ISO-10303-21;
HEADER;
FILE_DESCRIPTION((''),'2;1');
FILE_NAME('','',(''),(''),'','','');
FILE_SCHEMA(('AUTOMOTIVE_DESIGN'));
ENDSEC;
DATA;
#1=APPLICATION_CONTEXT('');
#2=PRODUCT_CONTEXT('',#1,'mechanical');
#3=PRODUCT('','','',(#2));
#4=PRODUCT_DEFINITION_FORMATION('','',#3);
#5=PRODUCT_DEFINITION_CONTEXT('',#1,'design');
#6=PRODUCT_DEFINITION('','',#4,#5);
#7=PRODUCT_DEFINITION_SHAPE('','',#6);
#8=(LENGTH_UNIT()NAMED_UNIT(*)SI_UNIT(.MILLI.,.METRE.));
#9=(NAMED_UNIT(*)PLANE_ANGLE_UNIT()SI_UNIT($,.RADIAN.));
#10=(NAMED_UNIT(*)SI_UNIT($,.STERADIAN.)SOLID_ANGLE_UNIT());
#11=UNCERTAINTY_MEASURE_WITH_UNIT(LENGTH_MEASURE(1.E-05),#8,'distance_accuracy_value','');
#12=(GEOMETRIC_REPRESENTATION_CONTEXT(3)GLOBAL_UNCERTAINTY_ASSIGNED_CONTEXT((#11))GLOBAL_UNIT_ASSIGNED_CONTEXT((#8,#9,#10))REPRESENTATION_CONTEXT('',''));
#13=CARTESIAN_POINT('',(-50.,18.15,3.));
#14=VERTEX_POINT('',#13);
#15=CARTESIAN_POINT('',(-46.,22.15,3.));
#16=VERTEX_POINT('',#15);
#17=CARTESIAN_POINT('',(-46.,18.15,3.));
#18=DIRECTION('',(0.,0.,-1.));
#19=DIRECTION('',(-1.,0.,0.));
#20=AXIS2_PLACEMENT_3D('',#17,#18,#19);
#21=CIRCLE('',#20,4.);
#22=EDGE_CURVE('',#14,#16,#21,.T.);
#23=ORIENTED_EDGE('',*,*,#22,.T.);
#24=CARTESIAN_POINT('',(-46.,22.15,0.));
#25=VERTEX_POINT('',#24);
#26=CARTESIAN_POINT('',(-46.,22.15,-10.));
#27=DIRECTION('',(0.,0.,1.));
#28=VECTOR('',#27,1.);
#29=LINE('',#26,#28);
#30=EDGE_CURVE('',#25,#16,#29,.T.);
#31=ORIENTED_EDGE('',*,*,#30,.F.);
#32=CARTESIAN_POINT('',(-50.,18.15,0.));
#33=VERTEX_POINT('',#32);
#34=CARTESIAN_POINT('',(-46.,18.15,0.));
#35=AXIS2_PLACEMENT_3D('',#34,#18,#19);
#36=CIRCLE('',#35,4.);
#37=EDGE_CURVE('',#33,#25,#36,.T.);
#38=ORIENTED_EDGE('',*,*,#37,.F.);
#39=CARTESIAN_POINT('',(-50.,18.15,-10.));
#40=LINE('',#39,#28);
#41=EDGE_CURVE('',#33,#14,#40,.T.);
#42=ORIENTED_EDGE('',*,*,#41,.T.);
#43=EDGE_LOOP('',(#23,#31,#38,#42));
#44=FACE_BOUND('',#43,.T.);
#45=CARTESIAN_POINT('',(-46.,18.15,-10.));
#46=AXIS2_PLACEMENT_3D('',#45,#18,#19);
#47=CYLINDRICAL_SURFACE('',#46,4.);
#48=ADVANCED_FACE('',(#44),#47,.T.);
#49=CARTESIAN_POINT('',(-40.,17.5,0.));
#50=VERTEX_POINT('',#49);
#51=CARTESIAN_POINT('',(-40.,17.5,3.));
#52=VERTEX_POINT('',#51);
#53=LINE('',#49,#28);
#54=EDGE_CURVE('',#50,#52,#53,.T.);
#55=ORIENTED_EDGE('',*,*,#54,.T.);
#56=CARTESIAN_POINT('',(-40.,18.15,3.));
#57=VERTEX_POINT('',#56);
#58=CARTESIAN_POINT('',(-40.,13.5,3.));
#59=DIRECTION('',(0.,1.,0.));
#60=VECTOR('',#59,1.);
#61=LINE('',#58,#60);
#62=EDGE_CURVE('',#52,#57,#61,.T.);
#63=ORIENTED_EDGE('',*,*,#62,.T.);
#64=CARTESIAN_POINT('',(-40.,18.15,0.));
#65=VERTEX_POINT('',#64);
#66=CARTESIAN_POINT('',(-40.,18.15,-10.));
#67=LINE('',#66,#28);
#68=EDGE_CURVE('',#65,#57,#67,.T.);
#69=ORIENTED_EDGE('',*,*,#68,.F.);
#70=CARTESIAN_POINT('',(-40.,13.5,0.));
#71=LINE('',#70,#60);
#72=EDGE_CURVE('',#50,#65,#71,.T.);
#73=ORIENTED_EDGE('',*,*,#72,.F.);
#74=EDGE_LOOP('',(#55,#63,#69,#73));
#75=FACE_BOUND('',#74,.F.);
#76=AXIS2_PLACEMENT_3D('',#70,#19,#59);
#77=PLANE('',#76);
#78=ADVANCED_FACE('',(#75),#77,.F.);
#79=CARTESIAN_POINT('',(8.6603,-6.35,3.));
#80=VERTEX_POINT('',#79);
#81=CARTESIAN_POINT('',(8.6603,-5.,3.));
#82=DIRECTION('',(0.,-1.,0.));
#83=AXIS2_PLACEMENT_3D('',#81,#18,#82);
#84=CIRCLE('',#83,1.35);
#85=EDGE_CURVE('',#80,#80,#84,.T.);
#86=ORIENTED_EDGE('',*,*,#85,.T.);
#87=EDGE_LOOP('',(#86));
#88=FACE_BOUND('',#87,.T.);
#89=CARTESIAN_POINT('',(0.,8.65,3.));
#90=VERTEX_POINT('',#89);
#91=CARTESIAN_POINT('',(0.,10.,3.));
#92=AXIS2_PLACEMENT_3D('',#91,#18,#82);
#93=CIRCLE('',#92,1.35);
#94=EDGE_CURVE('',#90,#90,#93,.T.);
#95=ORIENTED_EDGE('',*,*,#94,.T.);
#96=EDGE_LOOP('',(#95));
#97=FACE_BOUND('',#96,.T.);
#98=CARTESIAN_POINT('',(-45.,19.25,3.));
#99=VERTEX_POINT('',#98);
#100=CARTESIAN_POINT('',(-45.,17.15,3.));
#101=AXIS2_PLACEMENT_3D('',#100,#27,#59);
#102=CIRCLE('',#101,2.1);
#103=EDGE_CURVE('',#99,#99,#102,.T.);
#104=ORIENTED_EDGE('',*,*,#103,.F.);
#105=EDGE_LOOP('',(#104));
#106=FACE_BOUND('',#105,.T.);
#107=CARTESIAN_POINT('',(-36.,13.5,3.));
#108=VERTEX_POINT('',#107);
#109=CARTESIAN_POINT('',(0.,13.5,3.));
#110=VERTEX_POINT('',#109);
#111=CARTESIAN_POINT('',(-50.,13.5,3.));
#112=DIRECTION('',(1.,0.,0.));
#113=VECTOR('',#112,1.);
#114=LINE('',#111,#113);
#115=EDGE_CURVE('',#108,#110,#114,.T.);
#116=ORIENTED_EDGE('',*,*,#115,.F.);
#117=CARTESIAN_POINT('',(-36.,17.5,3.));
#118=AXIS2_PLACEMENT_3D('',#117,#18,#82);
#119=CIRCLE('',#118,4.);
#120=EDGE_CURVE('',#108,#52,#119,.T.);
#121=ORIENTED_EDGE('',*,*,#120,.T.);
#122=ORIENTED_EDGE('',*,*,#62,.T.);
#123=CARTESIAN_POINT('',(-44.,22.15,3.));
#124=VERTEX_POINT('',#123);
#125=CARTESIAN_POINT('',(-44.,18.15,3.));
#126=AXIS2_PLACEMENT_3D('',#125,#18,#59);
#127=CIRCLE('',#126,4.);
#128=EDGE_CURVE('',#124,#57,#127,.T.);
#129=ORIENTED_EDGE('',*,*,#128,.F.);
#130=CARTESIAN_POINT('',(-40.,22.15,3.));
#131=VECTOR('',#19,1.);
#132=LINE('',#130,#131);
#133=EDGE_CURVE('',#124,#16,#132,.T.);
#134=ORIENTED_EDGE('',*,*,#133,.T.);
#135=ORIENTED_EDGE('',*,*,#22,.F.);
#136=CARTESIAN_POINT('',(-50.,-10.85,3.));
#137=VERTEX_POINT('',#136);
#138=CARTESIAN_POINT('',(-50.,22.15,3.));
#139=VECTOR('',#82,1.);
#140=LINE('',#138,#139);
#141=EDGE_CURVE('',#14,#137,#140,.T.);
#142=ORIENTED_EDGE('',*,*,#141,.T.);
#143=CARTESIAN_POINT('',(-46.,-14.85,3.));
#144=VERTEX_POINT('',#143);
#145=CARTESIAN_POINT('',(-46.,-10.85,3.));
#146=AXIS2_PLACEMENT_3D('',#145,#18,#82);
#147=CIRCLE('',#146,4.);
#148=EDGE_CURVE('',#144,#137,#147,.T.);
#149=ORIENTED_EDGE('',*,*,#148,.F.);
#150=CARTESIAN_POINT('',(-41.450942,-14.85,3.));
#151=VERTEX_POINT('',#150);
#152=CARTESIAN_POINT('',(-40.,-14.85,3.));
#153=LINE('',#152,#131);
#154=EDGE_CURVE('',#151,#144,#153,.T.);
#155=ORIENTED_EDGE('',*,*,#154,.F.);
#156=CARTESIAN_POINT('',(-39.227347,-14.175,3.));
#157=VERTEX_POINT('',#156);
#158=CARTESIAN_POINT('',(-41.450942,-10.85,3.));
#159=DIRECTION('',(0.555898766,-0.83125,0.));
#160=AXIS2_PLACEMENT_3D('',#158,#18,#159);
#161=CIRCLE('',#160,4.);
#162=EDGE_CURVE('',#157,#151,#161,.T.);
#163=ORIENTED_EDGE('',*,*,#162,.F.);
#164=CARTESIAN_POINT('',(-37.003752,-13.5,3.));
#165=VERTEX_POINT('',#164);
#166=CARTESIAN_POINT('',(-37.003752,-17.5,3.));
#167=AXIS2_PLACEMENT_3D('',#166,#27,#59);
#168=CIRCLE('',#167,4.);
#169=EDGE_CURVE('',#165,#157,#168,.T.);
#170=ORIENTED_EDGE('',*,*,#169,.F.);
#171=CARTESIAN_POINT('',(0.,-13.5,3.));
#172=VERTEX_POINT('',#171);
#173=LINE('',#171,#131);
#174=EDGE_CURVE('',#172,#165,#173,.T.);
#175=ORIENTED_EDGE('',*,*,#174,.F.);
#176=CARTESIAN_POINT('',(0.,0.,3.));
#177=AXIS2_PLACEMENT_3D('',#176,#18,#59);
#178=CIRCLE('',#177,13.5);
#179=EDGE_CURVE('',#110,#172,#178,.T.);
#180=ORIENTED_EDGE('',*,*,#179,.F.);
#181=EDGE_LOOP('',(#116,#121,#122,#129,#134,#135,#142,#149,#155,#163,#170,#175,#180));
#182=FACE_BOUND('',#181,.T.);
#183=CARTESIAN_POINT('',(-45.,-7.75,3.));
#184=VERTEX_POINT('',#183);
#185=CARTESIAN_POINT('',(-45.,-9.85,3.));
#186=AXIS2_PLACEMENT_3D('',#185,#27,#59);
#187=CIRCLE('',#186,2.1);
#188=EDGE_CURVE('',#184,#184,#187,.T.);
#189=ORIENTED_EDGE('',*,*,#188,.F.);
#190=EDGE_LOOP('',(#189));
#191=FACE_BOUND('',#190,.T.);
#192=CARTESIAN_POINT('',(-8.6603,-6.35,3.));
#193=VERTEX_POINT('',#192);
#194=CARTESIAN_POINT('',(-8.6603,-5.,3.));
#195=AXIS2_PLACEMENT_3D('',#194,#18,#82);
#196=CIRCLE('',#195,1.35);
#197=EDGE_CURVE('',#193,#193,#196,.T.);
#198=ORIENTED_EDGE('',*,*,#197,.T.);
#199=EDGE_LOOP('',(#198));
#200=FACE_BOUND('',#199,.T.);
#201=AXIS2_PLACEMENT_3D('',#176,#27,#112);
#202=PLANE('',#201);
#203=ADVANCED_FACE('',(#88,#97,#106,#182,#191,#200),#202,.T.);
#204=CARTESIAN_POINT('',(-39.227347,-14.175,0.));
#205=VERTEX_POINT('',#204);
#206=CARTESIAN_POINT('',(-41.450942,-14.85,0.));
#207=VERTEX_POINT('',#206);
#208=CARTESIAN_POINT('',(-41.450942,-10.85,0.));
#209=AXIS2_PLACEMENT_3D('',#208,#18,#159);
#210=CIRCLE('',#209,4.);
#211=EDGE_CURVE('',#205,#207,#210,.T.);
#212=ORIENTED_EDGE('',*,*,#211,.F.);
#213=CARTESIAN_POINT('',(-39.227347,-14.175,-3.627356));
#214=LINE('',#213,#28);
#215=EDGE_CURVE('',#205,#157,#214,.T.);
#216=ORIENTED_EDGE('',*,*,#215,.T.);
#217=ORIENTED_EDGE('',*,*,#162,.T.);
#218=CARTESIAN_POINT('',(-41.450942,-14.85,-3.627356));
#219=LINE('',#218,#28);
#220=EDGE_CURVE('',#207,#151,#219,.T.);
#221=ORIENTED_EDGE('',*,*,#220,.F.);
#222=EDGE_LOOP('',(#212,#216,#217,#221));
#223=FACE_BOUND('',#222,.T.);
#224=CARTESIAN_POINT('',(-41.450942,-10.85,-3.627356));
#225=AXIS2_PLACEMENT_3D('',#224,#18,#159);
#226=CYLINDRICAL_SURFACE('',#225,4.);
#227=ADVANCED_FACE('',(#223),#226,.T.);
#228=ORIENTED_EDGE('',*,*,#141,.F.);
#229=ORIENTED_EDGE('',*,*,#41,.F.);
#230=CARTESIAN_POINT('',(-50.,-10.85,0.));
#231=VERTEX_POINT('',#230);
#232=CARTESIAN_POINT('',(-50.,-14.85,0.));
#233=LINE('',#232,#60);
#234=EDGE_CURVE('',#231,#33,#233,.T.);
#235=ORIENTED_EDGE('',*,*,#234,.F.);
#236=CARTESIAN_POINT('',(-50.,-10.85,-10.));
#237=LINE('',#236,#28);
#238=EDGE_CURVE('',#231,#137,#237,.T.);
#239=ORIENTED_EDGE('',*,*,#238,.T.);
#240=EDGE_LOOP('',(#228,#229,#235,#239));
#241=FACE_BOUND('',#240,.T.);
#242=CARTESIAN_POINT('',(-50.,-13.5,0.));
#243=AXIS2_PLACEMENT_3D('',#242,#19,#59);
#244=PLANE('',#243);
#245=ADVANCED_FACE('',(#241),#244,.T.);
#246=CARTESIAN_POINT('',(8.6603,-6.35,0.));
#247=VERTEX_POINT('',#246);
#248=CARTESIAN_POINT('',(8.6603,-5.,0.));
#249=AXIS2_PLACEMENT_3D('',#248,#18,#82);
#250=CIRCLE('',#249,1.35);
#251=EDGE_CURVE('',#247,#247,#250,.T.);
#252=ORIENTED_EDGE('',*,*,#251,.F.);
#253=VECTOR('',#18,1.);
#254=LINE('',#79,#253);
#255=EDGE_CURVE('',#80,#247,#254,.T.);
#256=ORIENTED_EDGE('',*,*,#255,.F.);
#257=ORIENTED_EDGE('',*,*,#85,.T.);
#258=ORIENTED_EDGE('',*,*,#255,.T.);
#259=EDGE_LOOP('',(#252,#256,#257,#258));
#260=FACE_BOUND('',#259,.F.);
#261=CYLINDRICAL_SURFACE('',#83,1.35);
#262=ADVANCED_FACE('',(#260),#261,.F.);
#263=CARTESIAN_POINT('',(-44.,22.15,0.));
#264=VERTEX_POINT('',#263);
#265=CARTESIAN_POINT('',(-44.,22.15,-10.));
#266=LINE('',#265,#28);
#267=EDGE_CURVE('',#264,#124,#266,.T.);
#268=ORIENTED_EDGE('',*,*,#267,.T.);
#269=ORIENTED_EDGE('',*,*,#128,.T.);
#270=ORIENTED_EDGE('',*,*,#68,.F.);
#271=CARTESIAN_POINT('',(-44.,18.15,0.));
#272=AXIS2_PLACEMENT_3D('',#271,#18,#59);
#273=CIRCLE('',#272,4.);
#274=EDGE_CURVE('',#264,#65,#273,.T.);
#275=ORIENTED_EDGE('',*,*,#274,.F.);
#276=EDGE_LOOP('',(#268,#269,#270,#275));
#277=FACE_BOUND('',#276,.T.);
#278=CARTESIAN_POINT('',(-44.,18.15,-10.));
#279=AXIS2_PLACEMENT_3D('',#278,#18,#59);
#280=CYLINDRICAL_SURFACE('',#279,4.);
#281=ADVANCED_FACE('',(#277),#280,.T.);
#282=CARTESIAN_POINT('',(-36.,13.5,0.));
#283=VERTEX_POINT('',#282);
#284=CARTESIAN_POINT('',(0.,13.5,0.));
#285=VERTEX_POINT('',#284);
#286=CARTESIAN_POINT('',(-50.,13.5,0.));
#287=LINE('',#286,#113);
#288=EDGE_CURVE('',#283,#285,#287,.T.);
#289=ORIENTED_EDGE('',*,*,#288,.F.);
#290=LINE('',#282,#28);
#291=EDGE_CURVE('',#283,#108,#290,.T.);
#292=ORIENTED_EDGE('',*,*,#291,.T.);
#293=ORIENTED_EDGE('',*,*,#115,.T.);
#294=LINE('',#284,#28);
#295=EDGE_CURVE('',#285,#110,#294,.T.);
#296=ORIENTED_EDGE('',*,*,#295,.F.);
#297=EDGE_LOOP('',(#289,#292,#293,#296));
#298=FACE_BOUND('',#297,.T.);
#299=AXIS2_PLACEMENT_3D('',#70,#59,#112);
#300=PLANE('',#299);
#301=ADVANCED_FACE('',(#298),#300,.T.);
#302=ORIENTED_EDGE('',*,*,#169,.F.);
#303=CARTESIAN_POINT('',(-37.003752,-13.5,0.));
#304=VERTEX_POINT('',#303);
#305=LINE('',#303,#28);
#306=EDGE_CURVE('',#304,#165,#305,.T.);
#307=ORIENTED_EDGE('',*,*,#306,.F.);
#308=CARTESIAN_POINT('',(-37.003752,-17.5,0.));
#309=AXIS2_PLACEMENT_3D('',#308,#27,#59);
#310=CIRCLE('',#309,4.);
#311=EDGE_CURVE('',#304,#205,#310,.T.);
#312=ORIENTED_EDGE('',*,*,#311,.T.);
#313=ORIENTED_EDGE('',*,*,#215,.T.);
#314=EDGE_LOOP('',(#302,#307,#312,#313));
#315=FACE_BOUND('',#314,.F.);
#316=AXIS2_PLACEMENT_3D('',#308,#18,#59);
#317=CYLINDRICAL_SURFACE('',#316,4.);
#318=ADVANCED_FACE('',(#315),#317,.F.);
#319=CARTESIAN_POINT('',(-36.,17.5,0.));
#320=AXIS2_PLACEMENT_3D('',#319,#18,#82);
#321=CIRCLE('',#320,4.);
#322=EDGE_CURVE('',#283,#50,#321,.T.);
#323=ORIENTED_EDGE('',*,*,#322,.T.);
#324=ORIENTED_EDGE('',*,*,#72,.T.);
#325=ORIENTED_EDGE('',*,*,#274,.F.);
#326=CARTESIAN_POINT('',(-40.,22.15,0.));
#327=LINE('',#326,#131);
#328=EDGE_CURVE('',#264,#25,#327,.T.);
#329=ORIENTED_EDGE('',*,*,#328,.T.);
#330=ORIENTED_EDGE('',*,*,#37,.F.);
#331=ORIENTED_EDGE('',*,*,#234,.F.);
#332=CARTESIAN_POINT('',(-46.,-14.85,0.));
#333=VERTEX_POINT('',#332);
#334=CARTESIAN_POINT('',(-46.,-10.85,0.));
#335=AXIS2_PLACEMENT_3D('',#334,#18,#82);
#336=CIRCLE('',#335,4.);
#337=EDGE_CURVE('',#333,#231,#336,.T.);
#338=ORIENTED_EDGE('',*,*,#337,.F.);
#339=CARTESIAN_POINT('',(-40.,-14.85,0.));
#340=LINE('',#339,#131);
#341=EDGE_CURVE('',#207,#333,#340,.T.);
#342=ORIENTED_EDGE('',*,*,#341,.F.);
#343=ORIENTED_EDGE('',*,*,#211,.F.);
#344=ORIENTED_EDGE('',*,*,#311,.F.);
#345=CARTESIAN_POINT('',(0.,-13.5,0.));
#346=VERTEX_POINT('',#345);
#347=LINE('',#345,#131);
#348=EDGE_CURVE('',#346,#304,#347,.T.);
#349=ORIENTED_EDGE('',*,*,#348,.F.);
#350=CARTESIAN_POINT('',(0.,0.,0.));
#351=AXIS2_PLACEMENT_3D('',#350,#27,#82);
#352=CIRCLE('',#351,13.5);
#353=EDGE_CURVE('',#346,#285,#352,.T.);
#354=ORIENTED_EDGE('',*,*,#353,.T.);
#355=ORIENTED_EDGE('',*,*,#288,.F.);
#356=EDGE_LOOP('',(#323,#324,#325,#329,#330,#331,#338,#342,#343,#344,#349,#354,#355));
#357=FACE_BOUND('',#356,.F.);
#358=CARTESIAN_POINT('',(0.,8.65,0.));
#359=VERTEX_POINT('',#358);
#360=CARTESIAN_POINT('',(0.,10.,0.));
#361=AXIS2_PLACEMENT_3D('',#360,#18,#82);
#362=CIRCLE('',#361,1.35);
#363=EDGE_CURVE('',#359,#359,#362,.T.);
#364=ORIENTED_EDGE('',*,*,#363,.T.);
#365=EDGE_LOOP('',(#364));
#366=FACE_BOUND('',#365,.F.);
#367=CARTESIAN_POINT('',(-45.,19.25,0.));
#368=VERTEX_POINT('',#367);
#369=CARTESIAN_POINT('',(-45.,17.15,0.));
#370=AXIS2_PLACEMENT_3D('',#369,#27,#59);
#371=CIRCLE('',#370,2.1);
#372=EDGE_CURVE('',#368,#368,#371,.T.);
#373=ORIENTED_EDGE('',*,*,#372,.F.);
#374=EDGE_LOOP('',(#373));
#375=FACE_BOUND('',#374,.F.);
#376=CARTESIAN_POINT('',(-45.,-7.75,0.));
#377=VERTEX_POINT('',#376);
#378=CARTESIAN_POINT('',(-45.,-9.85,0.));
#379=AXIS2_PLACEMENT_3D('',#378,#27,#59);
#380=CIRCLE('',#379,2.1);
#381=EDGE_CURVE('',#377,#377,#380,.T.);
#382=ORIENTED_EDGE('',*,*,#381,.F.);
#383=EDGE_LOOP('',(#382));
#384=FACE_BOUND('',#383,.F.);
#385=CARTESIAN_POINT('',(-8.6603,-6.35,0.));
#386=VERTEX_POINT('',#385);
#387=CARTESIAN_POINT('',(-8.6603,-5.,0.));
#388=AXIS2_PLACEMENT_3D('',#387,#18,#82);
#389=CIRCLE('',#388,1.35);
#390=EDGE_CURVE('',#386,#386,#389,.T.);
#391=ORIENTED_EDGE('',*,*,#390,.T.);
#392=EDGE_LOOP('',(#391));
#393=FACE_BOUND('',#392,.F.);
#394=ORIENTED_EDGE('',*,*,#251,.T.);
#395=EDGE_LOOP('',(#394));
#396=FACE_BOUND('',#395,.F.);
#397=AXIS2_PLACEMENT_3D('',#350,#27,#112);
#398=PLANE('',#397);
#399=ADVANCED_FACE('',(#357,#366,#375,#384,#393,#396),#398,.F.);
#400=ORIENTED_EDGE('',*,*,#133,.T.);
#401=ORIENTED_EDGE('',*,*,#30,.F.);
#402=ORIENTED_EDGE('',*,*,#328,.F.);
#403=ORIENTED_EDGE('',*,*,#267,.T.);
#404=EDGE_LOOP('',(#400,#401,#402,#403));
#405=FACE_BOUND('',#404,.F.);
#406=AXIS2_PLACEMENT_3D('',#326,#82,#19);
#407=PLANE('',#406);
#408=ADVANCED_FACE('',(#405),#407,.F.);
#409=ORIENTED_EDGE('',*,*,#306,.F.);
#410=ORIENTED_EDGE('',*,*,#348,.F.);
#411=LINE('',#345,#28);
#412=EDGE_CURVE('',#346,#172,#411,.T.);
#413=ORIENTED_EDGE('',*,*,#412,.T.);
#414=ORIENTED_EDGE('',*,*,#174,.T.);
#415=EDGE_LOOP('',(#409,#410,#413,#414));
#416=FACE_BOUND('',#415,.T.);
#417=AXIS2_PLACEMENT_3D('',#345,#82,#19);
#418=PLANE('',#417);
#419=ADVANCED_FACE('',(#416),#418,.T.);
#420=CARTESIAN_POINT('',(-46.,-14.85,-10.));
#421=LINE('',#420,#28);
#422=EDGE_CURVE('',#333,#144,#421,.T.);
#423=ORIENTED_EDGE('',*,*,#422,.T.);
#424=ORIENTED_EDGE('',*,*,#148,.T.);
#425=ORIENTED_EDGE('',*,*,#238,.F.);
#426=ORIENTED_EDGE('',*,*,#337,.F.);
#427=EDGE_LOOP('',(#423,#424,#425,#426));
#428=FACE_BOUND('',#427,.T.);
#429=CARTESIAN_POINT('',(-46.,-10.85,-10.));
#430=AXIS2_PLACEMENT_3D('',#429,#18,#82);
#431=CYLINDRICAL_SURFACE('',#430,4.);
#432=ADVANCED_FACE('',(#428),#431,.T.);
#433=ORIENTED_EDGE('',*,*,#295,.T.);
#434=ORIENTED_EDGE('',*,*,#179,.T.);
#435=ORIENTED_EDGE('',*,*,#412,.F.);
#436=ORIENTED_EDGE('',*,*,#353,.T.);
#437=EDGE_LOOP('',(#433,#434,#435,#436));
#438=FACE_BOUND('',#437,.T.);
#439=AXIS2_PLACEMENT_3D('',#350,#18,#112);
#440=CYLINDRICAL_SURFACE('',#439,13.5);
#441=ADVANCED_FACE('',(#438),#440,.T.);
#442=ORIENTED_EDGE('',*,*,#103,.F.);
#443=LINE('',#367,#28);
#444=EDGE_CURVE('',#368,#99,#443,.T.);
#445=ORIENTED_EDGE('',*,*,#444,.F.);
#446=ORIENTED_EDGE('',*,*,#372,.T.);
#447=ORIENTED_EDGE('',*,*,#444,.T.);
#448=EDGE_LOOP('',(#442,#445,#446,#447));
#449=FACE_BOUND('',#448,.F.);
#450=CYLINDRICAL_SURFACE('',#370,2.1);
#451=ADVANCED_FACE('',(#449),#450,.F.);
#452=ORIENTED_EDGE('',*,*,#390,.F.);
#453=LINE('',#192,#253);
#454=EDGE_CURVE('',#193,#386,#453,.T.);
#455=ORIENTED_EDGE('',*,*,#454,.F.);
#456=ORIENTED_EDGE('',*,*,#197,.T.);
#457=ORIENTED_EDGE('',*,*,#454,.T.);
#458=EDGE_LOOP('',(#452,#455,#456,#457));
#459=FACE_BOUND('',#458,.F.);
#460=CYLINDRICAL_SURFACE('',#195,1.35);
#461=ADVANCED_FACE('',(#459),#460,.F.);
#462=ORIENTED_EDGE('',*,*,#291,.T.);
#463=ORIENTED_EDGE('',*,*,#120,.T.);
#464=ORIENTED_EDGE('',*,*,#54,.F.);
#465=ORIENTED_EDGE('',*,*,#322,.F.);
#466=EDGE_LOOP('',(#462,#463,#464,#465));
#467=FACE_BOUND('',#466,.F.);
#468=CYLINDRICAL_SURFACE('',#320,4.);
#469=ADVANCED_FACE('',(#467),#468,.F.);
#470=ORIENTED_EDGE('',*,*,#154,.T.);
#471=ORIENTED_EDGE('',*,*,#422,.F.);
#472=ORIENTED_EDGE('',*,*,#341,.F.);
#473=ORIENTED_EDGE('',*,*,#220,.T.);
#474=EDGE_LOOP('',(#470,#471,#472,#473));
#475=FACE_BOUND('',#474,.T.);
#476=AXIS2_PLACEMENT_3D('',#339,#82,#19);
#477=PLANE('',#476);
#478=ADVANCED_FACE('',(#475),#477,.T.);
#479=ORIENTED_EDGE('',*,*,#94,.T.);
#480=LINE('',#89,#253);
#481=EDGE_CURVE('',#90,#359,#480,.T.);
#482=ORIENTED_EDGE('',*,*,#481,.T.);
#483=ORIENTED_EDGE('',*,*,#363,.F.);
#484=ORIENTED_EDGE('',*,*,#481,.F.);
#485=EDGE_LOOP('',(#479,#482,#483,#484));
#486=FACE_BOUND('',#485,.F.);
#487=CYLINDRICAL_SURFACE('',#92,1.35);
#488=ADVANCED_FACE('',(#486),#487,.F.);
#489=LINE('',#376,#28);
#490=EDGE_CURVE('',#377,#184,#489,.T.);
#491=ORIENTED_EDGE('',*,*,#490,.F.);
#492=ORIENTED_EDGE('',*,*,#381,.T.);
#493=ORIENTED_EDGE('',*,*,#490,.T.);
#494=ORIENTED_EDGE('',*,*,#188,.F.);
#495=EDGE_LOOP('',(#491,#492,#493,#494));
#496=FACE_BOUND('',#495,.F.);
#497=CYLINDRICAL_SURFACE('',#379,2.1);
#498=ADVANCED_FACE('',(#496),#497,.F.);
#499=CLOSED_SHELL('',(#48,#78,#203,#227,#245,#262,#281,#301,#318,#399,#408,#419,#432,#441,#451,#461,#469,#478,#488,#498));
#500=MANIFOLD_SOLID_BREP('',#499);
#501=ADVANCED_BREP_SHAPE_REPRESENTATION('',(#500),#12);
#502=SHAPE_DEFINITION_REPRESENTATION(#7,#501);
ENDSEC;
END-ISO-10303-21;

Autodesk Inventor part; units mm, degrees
ref_plane "YZ Plane" through (0, 0, 0) normal (1, 0, 0) x (0, 1, 0)
ref_plane "XZ Plane" through (0, 0, 0) normal (0, 1, 0) x (-1, 0, 0)
ref_plane "XY Plane" through (0, 0, 0) normal (0, 0, 1) x (1, 0, 0)
sketch "スケッチ1" plane through (0, 0, 0) normal (0, 0, 1) x (1, 0, 0)
  circle A0 centre (0, 0) radius 13.5
  dimension "d0" = 27
extrude "押し出し1" add sketch "スケッチ1" along normal blind 3
sketch "スケッチ2" plane through (0, 0, 3) normal (0, 0, 1) x (1, 0, 0)
  point P0 (0, 0)
  point P1 (0, 10)
  point P2 (-8.6603, -5)
  point P3 (8.6603, -5)
  dimension "d3" = 10
  dimension "d6" = 360
hole "穴1" at (0, 10, 3) at (-8.6603, -5, 3) at (8.6603, -5, 3) direction (0, 0, -1) diameter 2.7 depth 3
sketch "スケッチ3" plane through (0, 0, 0) normal (0, 0, -1) x (-1, 0, 0)
  circle A0 centre (0, 0) radius 13.5 projected
  line L0 (0, -13.5) -> (50, -13.5)
  line L1 (50, -13.5) -> (50, 13.5)
  line L2 (50, 13.5) -> (0, 13.5)
  line L3 (0, 13.5) -> (0, -13.5)
  line L4 (0, 0) -> (50, 0) construction
  line L5 (50, 13.5) -> (40, 13.5)
  line L6 (40, 13.5) -> (40, 22.15)
  line L7 (40, 22.15) -> (50, 22.15)
  line L8 (50, 22.15) -> (50, 13.5)
  line L9 (50, -13.5) -> (40, -13.5)
  line L10 (40, -13.5) -> (40, -14.85)
  line L11 (40, -14.85) -> (50, -14.85)
  line L12 (50, -14.85) -> (50, -13.5)
  point P0 (40, -13.5)
  dimension "d15" = 27
  dimension "d16" = 50
  dimension "d18" = 10
  dimension "d32" = 10
  dimension "d33" = 1.35
  dimension "d34" = 37
extrude "押し出し2" add sketch "スケッチ3" against normal up to surface (3 mm away) contours A0 L2 L1 L0 | L6 L7 L8 L2 | L0 L12 L11 L10
sketch "スケッチ4" plane through (0, 0, 0) normal (0, 0, -1) x (-1, 0, 0)
  line L0 (0, -13.5) -> (40, -13.5) projected
  line L1 (45, -13.5) -> (45, 22.15) construction
  line L2 (50, 22.15) -> (40, 22.15) projected
  line L3 (40, -14.85) -> (50, -14.85) projected
  line L4 (50, -14.85) -> (50, 22.15) projected
  point P0 (0, 0)
  point P1 (45, -9.85)
  point P2 (45, 17.15)
  dimension "d23" = 27
  dimension "d35" = 5
  dimension "d37" = 5
hole "穴2" at (-45, -9.85, 0) at (-45, 17.15, 0) direction (0, 0, 1) diameter 4.2 depth 3
fillet "フィレット1" radius 4 6 edges at (-40, 13.5, 1.5) (-40, 22.15, 1.5) (-50, 22.15, 1.5) (-50, -14.85, 1.5) (-40, -14.85, 1.5) (-40, -13.5, 1.5)
properties part number "finger2" material "アルミニウム 6061"
